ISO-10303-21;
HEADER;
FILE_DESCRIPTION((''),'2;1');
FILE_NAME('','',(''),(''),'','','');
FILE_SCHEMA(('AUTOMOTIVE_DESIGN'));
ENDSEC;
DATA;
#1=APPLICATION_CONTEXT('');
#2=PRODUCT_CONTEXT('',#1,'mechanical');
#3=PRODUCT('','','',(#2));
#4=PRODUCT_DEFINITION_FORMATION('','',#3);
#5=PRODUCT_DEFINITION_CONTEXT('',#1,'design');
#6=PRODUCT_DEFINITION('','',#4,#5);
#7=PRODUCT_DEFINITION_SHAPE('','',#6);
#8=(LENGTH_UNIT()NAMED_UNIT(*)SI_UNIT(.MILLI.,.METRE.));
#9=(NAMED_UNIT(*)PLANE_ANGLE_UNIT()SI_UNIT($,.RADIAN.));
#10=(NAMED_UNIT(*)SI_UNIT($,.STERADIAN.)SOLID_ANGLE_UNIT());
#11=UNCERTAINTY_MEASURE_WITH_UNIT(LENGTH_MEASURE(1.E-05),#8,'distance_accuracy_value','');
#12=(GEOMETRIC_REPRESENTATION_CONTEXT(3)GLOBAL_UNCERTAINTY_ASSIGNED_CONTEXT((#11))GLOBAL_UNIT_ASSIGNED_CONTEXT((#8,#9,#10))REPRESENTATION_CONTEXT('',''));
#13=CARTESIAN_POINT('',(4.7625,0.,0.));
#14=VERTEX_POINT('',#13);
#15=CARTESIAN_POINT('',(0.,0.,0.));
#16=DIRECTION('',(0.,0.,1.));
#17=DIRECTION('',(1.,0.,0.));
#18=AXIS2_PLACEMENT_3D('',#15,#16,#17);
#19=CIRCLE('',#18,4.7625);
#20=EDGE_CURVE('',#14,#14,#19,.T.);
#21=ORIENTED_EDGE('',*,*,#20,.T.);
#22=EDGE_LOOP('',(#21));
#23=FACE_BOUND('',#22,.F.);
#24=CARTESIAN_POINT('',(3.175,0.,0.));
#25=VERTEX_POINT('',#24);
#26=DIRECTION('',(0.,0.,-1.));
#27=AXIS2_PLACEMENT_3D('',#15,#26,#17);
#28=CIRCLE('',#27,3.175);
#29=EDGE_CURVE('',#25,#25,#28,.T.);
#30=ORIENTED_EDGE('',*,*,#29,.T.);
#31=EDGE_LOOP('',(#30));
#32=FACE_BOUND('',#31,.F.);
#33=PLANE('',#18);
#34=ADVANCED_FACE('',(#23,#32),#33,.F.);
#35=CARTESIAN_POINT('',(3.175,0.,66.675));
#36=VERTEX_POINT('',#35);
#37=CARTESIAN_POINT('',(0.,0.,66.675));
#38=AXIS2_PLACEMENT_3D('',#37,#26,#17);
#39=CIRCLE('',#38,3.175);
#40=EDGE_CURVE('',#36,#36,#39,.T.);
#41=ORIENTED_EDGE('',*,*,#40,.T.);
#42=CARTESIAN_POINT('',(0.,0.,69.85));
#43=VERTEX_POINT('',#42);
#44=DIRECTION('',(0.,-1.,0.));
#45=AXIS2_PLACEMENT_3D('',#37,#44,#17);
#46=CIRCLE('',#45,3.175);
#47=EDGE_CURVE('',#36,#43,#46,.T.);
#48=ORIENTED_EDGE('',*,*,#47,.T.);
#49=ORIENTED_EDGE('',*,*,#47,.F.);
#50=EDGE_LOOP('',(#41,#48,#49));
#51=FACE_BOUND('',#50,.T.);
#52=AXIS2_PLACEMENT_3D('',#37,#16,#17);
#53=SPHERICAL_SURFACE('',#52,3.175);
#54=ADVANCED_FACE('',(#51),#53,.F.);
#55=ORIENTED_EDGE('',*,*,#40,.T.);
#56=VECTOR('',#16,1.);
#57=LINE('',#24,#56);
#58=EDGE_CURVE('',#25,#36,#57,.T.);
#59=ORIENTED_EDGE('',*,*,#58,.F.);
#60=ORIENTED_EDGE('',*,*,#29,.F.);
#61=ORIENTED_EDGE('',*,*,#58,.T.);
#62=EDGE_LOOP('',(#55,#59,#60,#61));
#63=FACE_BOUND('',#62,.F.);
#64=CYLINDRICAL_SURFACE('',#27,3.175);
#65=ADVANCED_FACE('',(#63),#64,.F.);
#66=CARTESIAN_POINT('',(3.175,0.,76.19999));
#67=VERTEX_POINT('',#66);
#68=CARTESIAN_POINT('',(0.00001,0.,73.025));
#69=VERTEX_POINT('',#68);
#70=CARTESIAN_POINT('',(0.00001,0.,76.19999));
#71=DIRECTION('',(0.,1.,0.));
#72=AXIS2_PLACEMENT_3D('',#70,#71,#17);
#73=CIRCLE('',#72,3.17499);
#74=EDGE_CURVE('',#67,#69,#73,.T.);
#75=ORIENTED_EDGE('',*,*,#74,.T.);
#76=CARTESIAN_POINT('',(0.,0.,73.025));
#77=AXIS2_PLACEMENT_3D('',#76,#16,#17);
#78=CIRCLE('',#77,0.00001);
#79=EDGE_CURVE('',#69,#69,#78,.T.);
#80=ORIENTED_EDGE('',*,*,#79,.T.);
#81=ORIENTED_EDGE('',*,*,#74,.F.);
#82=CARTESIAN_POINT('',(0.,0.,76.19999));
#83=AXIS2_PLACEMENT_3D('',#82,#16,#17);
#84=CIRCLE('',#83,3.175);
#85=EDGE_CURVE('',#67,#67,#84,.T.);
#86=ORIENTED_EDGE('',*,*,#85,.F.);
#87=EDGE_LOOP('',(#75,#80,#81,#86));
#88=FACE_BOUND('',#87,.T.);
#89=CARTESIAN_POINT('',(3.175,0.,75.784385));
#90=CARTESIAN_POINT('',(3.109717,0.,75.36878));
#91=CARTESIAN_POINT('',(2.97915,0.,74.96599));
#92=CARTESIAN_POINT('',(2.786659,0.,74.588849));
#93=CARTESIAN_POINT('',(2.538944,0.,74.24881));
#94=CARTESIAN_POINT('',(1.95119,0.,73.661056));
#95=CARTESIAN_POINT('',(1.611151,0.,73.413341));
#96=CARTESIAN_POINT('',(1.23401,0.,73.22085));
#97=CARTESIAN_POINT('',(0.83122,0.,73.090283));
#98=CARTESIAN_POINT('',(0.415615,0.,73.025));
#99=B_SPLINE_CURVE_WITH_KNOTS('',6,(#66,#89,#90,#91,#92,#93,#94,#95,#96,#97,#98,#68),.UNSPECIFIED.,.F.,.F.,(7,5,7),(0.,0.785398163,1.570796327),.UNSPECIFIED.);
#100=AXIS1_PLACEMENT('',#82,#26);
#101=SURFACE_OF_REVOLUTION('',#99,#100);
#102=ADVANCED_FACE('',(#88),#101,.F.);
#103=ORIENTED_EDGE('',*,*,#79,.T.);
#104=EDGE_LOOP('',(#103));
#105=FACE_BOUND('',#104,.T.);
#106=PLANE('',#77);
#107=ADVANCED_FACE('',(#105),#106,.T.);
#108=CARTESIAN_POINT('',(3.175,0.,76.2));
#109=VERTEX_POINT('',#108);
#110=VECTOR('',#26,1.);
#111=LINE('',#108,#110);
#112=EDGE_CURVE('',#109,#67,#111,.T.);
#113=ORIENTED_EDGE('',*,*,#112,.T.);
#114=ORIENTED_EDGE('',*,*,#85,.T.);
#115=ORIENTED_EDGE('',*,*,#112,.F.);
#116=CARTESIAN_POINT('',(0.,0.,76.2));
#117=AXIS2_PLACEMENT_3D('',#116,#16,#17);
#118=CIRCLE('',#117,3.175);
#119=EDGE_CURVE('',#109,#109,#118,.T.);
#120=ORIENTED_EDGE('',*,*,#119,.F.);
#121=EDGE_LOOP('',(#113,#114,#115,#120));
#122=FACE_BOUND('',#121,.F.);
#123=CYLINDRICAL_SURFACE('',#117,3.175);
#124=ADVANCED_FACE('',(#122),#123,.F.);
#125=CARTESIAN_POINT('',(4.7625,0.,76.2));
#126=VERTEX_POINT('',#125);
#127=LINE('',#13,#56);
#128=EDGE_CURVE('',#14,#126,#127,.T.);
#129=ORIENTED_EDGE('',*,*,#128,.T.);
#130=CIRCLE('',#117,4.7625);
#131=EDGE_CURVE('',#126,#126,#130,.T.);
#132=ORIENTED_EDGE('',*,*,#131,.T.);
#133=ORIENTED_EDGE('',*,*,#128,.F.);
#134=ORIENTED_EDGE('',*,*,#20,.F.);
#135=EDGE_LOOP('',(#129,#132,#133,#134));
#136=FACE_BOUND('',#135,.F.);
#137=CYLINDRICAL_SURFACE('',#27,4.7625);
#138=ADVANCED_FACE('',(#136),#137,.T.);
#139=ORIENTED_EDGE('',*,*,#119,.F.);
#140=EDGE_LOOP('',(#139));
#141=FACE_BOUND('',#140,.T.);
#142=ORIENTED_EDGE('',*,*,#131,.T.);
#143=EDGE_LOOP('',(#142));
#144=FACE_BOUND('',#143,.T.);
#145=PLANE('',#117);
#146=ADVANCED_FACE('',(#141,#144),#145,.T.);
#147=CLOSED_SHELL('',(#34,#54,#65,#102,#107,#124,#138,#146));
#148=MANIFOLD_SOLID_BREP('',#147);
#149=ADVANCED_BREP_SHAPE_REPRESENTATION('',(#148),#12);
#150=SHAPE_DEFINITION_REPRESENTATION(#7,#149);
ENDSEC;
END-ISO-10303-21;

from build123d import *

# Parameters (mm, degrees)
F0_R     = 4.7625
F1_DEPTH = 76.2
F2_R     = 3.175
F3_DEPTH = 3.175
F4_R     = 3.17499
F5_R     = 3.175
F6_DEPTH = 69.85
F7_R     = 3.175


# Not quite as in the source:
# - a fillet or chamfer is up to 0.001 mm smaller than in the source, because OpenCascade refuses the exact size


with BuildPart() as f1:
    # F0 (on Top) → F1 (new body)
    with BuildSketch(Plane.XY):
        Circle(F0_R)
    extrude(amount=F1_DEPTH)

    # F2 (on face) → F3 (cut)
    with BuildSketch(Plane.XY.offset(76.2)):
        Circle(F2_R)
    extrude(amount=-F3_DEPTH, mode=Mode.SUBTRACT)

    # F4 (radius 3.175 in the source; OpenCascade refuses exactly that, so slightly less here)
    f4_edges = [f1.edges().sort_by_distance(p)[0] for p in [
        (-3.175, 0, 73.025),
    ]]
    fillet(f4_edges, radius=F4_R)

    # F5 (on face) → F6 (cut)
    with BuildSketch(Plane(origin=(0, 0, 0), x_dir=(1, 0, 0), z_dir=(0, 0, -1))):
        Circle(F5_R)
    extrude(amount=-F6_DEPTH, mode=Mode.SUBTRACT)

    # F7
    f7_edges = [f1.edges().sort_by_distance(p)[0] for p in [
        (-3.175, 0, 69.85),
    ]]
    fillet(f7_edges, radius=F7_R)


solid = f1.part
